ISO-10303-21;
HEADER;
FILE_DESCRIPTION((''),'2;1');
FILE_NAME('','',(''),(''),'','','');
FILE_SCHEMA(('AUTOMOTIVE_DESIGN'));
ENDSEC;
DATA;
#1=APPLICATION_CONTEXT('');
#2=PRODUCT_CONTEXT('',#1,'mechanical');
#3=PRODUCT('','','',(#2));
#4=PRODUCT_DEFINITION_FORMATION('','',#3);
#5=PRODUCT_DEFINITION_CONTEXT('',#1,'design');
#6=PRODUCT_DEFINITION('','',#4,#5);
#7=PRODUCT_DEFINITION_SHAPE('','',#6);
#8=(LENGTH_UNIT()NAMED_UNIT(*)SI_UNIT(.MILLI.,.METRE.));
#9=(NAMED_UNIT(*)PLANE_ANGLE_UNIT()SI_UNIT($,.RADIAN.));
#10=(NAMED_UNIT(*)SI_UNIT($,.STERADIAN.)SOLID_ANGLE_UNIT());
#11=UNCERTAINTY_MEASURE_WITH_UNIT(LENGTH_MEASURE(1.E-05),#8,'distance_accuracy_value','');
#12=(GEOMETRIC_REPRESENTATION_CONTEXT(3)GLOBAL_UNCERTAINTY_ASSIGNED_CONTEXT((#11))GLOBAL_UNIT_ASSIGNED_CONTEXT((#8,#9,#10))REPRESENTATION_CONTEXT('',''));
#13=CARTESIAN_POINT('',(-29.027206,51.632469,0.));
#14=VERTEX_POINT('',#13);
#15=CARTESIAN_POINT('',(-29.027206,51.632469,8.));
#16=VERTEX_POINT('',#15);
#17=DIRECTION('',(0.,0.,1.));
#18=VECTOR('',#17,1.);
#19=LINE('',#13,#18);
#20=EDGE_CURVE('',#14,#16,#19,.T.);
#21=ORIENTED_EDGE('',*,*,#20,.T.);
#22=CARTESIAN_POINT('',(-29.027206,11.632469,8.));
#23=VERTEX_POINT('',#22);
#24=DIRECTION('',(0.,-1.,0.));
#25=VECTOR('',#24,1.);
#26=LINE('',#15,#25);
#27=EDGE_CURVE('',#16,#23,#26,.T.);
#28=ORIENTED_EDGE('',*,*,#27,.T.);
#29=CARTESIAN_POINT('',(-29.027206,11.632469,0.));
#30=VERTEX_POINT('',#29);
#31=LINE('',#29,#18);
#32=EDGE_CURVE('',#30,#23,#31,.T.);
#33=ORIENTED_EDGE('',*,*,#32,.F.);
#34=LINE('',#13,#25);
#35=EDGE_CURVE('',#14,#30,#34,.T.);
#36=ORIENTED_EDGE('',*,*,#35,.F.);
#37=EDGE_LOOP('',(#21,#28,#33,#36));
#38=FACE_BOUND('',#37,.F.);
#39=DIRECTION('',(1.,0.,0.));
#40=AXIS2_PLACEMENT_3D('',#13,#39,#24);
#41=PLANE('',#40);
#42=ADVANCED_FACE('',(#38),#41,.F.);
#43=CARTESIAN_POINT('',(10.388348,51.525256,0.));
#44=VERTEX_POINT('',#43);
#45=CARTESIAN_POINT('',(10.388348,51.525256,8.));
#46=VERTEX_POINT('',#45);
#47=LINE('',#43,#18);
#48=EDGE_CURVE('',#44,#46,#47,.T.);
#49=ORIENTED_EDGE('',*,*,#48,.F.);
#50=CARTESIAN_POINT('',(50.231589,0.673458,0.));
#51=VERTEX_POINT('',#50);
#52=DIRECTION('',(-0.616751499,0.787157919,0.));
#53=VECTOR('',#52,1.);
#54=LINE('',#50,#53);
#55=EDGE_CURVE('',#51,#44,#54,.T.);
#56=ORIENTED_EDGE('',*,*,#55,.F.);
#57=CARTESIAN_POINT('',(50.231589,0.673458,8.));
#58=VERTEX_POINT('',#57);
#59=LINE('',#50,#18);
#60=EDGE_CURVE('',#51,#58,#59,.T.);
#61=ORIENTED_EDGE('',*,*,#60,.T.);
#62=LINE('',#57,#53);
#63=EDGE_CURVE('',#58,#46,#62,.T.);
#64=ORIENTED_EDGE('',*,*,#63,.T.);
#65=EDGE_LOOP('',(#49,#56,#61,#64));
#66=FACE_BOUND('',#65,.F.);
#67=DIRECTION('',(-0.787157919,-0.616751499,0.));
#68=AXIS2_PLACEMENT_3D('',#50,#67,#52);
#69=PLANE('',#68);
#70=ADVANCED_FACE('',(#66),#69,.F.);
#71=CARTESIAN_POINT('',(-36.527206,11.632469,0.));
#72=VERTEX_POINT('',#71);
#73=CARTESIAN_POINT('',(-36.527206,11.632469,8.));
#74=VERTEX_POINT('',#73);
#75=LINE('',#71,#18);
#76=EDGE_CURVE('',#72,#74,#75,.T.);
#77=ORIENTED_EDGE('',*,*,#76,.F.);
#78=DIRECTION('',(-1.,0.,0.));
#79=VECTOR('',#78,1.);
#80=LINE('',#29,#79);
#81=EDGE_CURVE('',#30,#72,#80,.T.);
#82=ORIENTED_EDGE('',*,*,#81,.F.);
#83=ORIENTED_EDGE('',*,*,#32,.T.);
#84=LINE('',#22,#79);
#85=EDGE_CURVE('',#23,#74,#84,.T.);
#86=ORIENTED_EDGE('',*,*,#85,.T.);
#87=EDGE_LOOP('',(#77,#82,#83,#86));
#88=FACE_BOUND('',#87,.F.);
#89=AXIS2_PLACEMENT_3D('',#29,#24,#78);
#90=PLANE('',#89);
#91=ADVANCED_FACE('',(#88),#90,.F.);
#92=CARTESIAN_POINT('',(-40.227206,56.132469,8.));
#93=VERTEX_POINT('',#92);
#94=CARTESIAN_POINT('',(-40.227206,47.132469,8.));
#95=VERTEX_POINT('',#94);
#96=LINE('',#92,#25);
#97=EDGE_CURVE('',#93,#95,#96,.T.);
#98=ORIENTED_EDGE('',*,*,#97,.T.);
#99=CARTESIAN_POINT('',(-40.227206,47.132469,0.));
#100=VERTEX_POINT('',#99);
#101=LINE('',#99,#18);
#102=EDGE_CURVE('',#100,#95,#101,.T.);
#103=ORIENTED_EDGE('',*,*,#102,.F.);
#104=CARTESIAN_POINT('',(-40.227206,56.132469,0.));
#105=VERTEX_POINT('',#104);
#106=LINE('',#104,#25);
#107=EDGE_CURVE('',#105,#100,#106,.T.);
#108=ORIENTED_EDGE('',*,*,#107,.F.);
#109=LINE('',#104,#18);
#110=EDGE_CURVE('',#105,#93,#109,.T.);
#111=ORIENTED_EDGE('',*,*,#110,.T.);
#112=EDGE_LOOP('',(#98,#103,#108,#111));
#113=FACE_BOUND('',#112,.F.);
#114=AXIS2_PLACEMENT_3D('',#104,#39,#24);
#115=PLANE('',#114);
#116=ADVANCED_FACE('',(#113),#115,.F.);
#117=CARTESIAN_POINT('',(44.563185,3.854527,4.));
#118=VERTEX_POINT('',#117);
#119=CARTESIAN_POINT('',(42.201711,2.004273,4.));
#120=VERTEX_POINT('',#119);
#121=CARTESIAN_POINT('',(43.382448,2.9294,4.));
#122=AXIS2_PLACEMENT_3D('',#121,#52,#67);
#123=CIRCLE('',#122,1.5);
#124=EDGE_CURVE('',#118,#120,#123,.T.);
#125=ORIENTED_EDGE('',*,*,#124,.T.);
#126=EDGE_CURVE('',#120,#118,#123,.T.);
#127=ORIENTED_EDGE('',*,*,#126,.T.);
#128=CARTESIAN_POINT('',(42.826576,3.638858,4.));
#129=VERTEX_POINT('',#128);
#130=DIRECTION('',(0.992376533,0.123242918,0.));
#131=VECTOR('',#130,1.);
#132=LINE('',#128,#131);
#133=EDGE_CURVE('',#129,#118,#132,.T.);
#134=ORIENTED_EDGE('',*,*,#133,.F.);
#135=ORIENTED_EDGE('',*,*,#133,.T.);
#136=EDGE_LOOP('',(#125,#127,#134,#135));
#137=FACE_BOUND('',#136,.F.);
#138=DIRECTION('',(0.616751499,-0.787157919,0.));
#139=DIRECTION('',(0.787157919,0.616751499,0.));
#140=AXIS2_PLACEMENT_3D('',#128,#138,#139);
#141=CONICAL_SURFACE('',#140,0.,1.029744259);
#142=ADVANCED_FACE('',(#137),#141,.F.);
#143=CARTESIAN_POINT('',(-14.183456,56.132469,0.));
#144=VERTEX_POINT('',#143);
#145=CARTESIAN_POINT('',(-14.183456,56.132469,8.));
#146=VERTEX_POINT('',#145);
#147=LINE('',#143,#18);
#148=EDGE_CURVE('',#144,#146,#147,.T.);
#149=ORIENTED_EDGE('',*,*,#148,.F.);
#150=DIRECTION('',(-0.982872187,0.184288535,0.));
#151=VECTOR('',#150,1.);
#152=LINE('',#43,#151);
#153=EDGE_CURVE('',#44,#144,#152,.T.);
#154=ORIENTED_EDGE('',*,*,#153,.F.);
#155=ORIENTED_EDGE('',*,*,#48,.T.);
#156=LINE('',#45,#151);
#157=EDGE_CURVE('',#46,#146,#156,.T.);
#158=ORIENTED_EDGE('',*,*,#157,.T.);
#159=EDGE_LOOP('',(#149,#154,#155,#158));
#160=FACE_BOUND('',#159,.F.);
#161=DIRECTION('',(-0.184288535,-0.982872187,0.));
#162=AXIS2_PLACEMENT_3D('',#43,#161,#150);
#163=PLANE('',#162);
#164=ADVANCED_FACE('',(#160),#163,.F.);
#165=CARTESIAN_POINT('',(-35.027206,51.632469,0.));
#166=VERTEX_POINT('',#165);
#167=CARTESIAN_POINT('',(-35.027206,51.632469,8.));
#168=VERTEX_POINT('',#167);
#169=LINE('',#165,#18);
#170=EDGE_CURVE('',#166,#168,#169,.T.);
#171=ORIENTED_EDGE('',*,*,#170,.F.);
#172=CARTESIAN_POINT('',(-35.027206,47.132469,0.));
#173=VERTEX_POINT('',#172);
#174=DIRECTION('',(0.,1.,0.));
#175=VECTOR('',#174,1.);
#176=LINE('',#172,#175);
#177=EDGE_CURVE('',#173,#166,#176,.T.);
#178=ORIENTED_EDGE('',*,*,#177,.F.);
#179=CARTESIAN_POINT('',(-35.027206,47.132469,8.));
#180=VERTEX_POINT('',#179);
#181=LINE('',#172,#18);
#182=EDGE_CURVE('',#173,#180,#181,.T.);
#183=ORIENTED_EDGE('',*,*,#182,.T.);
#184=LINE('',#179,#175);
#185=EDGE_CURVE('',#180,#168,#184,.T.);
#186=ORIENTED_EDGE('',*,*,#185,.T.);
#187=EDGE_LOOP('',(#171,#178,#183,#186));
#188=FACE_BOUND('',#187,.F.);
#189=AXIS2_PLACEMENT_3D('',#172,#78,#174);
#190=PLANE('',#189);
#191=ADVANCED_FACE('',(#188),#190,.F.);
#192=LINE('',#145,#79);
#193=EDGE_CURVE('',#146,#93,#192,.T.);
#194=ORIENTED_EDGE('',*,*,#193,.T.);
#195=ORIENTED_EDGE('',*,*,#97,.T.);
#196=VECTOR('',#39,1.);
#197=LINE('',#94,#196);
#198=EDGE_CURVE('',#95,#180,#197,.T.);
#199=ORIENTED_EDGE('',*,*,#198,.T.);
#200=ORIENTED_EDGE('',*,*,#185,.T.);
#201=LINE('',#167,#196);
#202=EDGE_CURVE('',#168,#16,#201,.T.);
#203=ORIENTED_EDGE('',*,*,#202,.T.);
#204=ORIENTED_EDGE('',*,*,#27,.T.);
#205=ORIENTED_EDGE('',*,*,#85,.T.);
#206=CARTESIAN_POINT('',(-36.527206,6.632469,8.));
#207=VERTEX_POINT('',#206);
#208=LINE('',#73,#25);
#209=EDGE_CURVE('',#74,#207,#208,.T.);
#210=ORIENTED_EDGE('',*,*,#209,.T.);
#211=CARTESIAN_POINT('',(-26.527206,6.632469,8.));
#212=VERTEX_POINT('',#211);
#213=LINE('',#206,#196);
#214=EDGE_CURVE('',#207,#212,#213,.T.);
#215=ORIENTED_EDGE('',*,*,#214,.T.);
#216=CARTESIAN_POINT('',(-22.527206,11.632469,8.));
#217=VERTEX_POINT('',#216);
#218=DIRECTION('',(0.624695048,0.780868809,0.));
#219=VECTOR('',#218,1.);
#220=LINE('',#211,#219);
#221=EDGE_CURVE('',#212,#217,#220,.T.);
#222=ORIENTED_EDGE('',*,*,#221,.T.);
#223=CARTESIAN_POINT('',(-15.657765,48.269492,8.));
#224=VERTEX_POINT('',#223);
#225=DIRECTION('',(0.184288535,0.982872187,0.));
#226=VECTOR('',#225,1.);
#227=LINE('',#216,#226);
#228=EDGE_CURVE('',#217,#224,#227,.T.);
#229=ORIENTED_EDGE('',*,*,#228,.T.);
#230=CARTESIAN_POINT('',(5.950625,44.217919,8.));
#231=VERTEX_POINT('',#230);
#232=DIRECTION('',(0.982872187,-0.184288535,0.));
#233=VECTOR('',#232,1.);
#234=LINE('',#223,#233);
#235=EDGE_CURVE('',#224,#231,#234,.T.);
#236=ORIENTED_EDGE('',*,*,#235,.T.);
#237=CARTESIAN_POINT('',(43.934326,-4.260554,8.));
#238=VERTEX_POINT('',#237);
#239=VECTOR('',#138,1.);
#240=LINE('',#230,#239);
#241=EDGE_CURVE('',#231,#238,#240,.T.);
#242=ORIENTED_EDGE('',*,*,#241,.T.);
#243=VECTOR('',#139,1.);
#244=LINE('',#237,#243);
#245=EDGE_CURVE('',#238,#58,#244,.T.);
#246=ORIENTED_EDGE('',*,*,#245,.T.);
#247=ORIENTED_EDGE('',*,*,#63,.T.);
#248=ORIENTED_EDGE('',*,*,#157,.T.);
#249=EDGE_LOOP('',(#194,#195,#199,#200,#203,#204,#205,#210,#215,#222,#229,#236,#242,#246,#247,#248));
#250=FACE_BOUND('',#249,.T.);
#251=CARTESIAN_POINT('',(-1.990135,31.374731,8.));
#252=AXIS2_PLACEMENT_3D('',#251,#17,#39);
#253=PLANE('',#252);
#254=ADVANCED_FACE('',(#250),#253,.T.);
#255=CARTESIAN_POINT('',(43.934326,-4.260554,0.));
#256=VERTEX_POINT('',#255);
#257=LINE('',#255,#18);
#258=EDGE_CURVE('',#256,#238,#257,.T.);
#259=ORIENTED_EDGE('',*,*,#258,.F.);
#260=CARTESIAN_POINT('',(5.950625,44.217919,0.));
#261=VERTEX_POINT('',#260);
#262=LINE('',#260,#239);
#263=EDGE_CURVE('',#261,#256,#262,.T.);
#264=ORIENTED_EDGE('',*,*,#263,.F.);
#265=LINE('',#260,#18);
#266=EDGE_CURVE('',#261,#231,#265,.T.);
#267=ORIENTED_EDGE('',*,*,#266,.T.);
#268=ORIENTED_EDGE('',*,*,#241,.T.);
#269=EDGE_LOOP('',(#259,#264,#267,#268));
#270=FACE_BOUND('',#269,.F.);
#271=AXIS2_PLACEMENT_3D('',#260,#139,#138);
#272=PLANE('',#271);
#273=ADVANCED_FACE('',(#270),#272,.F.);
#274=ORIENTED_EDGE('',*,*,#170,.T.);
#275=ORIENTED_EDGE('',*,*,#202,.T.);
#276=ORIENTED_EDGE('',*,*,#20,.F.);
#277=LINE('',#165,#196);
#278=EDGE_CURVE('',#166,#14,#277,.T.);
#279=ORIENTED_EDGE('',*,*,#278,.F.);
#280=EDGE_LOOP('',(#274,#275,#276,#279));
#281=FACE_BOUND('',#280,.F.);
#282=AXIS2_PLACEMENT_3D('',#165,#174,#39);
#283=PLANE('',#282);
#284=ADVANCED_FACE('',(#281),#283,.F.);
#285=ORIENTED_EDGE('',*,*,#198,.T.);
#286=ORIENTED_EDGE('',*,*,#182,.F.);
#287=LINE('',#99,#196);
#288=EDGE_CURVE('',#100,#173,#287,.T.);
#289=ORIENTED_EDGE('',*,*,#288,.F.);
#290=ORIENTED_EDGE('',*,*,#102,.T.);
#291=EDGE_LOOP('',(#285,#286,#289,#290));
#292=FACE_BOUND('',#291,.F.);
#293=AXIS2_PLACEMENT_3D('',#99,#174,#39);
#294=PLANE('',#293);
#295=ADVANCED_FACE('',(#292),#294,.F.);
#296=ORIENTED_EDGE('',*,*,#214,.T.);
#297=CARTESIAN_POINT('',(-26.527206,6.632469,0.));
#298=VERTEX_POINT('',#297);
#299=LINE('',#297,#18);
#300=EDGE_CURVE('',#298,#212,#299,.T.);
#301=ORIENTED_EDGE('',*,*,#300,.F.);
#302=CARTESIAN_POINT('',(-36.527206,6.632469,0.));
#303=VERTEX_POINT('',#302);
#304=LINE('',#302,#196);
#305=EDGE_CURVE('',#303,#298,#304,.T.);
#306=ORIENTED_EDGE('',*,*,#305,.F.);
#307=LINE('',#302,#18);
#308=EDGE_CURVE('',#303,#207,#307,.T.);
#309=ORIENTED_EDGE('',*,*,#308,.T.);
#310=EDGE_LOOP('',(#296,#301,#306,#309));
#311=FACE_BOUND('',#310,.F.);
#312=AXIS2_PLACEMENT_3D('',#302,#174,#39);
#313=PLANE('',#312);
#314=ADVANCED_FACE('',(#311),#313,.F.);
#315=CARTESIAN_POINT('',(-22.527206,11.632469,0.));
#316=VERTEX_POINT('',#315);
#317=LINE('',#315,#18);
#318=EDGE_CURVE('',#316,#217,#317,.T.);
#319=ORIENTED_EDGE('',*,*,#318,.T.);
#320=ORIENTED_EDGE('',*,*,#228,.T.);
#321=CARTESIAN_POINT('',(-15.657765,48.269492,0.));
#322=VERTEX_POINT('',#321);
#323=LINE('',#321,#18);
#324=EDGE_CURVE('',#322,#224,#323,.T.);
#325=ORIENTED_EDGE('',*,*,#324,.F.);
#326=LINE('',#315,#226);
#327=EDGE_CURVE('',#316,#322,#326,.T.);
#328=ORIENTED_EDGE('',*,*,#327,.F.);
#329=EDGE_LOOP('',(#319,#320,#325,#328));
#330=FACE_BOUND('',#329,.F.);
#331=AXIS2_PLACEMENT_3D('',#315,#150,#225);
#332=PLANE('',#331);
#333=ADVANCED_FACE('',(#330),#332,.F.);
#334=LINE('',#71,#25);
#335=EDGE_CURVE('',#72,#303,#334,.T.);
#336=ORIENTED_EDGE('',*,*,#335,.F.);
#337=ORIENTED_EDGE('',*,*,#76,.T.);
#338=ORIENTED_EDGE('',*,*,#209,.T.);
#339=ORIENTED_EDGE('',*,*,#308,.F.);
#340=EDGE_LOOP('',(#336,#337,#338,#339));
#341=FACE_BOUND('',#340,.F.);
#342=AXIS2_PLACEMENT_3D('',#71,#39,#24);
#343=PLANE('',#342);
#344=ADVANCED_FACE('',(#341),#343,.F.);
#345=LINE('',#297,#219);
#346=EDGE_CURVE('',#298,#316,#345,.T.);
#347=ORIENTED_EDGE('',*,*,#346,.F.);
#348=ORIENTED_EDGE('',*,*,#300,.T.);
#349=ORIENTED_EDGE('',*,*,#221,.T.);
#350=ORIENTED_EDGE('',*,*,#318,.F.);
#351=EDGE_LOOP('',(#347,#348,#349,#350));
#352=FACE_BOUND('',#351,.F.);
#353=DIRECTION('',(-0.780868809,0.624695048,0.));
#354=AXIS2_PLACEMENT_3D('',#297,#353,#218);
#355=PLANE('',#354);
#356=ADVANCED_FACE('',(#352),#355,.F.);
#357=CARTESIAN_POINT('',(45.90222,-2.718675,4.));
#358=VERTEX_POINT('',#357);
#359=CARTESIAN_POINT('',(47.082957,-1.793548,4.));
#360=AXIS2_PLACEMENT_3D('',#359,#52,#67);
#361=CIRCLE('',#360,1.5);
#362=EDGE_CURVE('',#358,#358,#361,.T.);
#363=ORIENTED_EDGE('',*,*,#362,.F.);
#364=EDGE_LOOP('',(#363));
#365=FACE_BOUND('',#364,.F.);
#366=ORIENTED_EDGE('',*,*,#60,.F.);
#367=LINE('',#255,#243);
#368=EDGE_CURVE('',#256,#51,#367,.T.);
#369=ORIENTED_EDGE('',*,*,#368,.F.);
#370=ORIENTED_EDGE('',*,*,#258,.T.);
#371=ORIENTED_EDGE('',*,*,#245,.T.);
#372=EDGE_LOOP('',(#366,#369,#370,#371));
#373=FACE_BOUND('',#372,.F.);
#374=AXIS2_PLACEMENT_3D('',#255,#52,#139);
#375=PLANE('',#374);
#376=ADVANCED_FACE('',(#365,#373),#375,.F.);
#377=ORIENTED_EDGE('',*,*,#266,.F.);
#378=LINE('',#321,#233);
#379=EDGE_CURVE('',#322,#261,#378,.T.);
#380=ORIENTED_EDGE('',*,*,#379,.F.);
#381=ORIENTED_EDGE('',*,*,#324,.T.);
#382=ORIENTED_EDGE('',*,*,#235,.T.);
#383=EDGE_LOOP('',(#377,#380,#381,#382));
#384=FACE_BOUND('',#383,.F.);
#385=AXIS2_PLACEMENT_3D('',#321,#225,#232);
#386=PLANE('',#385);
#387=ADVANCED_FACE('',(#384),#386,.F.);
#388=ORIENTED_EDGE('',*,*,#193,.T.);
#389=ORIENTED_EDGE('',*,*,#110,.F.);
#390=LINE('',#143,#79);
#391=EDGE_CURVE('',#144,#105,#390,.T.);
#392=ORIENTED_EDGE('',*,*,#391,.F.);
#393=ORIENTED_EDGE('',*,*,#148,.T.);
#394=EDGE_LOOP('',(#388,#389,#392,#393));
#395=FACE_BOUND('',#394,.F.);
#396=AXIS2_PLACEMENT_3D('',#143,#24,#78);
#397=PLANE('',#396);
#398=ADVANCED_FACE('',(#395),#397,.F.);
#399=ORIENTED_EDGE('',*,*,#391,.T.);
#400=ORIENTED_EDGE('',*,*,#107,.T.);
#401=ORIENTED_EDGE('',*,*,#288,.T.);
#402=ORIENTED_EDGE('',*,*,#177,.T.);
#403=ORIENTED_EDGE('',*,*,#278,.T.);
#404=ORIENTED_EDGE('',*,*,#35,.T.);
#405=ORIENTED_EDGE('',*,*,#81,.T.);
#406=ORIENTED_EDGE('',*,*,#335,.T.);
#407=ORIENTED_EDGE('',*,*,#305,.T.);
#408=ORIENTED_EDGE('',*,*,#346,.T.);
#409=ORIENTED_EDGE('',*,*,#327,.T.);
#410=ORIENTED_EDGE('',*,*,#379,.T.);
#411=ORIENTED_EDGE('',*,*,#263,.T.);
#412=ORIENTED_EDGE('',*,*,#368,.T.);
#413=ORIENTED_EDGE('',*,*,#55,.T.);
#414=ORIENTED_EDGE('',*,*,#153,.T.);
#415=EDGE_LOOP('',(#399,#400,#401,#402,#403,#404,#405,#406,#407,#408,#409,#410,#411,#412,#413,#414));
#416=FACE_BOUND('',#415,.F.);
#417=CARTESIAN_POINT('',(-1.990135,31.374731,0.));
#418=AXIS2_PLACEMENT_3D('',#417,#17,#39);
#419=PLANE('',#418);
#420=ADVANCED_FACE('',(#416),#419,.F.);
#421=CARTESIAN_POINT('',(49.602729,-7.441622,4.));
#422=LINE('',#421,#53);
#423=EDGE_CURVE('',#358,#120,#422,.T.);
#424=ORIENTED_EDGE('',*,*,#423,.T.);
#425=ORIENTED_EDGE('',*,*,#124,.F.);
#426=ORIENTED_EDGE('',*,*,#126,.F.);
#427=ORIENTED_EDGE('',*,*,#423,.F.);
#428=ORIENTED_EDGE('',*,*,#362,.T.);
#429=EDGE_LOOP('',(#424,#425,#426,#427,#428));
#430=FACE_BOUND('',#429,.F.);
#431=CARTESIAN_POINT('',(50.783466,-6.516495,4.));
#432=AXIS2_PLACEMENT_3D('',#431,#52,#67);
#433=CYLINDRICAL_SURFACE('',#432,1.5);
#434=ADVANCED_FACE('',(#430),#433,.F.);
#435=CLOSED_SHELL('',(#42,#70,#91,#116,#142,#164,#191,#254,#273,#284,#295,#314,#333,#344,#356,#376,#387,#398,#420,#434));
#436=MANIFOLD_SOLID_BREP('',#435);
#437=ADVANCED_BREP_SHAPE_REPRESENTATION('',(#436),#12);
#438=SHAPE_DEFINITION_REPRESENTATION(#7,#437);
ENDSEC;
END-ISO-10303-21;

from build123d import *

# Parameters (mm, degrees)
F1_DEPTH = 8
F3_D     = 3
F3_DEPTH = 6
F3_TIP   = 0.9012909285


with BuildPart() as f1:
    # F0 (on Top) → F1 (new body)
    with BuildSketch(Plane.XY):
        Polygon((-35.0272064194, 47.1324694753), (-35.0272064194, 51.6324694753), (-29.0272064194, 51.6324694753), (-29.0272064194, 11.6324694753), (-36.5272064194, 11.6324694753), (-36.5272064194, 6.6324694753), (-26.5272064194, 6.6324694753), (-22.5272064194, 11.6324694753), (-15.6577646998, 48.2694919798), (5.9506252409, 44.2179188659), (43.934325687, -4.2605536739), (50.2315890367, 0.6734583148), (10.388348254, 51.525256099), (-14.1834564194, 56.1324694753), (-40.2272064194, 56.1324694753), (-40.2272064194, 47.1324694753), align=None)
    extrude(amount=F1_DEPTH)

    # F3
    with Locations(Plane(origin=(18.7802618476, -23.969186719, 0), x_dir=(0.7871579187, 0.6167514986, 0), z_dir=(0.6167514986, -0.7871579187, 0))):
        with Locations((35.9555495046, 4)):
            Hole(F3_D / 2, depth=F3_DEPTH)
            with Locations((0, 0, -(F3_DEPTH + F3_TIP / 2))):  # 118° drill point
                Cone(0, F3_D / 2, F3_TIP, mode=Mode.SUBTRACT)


solid = f1.part
